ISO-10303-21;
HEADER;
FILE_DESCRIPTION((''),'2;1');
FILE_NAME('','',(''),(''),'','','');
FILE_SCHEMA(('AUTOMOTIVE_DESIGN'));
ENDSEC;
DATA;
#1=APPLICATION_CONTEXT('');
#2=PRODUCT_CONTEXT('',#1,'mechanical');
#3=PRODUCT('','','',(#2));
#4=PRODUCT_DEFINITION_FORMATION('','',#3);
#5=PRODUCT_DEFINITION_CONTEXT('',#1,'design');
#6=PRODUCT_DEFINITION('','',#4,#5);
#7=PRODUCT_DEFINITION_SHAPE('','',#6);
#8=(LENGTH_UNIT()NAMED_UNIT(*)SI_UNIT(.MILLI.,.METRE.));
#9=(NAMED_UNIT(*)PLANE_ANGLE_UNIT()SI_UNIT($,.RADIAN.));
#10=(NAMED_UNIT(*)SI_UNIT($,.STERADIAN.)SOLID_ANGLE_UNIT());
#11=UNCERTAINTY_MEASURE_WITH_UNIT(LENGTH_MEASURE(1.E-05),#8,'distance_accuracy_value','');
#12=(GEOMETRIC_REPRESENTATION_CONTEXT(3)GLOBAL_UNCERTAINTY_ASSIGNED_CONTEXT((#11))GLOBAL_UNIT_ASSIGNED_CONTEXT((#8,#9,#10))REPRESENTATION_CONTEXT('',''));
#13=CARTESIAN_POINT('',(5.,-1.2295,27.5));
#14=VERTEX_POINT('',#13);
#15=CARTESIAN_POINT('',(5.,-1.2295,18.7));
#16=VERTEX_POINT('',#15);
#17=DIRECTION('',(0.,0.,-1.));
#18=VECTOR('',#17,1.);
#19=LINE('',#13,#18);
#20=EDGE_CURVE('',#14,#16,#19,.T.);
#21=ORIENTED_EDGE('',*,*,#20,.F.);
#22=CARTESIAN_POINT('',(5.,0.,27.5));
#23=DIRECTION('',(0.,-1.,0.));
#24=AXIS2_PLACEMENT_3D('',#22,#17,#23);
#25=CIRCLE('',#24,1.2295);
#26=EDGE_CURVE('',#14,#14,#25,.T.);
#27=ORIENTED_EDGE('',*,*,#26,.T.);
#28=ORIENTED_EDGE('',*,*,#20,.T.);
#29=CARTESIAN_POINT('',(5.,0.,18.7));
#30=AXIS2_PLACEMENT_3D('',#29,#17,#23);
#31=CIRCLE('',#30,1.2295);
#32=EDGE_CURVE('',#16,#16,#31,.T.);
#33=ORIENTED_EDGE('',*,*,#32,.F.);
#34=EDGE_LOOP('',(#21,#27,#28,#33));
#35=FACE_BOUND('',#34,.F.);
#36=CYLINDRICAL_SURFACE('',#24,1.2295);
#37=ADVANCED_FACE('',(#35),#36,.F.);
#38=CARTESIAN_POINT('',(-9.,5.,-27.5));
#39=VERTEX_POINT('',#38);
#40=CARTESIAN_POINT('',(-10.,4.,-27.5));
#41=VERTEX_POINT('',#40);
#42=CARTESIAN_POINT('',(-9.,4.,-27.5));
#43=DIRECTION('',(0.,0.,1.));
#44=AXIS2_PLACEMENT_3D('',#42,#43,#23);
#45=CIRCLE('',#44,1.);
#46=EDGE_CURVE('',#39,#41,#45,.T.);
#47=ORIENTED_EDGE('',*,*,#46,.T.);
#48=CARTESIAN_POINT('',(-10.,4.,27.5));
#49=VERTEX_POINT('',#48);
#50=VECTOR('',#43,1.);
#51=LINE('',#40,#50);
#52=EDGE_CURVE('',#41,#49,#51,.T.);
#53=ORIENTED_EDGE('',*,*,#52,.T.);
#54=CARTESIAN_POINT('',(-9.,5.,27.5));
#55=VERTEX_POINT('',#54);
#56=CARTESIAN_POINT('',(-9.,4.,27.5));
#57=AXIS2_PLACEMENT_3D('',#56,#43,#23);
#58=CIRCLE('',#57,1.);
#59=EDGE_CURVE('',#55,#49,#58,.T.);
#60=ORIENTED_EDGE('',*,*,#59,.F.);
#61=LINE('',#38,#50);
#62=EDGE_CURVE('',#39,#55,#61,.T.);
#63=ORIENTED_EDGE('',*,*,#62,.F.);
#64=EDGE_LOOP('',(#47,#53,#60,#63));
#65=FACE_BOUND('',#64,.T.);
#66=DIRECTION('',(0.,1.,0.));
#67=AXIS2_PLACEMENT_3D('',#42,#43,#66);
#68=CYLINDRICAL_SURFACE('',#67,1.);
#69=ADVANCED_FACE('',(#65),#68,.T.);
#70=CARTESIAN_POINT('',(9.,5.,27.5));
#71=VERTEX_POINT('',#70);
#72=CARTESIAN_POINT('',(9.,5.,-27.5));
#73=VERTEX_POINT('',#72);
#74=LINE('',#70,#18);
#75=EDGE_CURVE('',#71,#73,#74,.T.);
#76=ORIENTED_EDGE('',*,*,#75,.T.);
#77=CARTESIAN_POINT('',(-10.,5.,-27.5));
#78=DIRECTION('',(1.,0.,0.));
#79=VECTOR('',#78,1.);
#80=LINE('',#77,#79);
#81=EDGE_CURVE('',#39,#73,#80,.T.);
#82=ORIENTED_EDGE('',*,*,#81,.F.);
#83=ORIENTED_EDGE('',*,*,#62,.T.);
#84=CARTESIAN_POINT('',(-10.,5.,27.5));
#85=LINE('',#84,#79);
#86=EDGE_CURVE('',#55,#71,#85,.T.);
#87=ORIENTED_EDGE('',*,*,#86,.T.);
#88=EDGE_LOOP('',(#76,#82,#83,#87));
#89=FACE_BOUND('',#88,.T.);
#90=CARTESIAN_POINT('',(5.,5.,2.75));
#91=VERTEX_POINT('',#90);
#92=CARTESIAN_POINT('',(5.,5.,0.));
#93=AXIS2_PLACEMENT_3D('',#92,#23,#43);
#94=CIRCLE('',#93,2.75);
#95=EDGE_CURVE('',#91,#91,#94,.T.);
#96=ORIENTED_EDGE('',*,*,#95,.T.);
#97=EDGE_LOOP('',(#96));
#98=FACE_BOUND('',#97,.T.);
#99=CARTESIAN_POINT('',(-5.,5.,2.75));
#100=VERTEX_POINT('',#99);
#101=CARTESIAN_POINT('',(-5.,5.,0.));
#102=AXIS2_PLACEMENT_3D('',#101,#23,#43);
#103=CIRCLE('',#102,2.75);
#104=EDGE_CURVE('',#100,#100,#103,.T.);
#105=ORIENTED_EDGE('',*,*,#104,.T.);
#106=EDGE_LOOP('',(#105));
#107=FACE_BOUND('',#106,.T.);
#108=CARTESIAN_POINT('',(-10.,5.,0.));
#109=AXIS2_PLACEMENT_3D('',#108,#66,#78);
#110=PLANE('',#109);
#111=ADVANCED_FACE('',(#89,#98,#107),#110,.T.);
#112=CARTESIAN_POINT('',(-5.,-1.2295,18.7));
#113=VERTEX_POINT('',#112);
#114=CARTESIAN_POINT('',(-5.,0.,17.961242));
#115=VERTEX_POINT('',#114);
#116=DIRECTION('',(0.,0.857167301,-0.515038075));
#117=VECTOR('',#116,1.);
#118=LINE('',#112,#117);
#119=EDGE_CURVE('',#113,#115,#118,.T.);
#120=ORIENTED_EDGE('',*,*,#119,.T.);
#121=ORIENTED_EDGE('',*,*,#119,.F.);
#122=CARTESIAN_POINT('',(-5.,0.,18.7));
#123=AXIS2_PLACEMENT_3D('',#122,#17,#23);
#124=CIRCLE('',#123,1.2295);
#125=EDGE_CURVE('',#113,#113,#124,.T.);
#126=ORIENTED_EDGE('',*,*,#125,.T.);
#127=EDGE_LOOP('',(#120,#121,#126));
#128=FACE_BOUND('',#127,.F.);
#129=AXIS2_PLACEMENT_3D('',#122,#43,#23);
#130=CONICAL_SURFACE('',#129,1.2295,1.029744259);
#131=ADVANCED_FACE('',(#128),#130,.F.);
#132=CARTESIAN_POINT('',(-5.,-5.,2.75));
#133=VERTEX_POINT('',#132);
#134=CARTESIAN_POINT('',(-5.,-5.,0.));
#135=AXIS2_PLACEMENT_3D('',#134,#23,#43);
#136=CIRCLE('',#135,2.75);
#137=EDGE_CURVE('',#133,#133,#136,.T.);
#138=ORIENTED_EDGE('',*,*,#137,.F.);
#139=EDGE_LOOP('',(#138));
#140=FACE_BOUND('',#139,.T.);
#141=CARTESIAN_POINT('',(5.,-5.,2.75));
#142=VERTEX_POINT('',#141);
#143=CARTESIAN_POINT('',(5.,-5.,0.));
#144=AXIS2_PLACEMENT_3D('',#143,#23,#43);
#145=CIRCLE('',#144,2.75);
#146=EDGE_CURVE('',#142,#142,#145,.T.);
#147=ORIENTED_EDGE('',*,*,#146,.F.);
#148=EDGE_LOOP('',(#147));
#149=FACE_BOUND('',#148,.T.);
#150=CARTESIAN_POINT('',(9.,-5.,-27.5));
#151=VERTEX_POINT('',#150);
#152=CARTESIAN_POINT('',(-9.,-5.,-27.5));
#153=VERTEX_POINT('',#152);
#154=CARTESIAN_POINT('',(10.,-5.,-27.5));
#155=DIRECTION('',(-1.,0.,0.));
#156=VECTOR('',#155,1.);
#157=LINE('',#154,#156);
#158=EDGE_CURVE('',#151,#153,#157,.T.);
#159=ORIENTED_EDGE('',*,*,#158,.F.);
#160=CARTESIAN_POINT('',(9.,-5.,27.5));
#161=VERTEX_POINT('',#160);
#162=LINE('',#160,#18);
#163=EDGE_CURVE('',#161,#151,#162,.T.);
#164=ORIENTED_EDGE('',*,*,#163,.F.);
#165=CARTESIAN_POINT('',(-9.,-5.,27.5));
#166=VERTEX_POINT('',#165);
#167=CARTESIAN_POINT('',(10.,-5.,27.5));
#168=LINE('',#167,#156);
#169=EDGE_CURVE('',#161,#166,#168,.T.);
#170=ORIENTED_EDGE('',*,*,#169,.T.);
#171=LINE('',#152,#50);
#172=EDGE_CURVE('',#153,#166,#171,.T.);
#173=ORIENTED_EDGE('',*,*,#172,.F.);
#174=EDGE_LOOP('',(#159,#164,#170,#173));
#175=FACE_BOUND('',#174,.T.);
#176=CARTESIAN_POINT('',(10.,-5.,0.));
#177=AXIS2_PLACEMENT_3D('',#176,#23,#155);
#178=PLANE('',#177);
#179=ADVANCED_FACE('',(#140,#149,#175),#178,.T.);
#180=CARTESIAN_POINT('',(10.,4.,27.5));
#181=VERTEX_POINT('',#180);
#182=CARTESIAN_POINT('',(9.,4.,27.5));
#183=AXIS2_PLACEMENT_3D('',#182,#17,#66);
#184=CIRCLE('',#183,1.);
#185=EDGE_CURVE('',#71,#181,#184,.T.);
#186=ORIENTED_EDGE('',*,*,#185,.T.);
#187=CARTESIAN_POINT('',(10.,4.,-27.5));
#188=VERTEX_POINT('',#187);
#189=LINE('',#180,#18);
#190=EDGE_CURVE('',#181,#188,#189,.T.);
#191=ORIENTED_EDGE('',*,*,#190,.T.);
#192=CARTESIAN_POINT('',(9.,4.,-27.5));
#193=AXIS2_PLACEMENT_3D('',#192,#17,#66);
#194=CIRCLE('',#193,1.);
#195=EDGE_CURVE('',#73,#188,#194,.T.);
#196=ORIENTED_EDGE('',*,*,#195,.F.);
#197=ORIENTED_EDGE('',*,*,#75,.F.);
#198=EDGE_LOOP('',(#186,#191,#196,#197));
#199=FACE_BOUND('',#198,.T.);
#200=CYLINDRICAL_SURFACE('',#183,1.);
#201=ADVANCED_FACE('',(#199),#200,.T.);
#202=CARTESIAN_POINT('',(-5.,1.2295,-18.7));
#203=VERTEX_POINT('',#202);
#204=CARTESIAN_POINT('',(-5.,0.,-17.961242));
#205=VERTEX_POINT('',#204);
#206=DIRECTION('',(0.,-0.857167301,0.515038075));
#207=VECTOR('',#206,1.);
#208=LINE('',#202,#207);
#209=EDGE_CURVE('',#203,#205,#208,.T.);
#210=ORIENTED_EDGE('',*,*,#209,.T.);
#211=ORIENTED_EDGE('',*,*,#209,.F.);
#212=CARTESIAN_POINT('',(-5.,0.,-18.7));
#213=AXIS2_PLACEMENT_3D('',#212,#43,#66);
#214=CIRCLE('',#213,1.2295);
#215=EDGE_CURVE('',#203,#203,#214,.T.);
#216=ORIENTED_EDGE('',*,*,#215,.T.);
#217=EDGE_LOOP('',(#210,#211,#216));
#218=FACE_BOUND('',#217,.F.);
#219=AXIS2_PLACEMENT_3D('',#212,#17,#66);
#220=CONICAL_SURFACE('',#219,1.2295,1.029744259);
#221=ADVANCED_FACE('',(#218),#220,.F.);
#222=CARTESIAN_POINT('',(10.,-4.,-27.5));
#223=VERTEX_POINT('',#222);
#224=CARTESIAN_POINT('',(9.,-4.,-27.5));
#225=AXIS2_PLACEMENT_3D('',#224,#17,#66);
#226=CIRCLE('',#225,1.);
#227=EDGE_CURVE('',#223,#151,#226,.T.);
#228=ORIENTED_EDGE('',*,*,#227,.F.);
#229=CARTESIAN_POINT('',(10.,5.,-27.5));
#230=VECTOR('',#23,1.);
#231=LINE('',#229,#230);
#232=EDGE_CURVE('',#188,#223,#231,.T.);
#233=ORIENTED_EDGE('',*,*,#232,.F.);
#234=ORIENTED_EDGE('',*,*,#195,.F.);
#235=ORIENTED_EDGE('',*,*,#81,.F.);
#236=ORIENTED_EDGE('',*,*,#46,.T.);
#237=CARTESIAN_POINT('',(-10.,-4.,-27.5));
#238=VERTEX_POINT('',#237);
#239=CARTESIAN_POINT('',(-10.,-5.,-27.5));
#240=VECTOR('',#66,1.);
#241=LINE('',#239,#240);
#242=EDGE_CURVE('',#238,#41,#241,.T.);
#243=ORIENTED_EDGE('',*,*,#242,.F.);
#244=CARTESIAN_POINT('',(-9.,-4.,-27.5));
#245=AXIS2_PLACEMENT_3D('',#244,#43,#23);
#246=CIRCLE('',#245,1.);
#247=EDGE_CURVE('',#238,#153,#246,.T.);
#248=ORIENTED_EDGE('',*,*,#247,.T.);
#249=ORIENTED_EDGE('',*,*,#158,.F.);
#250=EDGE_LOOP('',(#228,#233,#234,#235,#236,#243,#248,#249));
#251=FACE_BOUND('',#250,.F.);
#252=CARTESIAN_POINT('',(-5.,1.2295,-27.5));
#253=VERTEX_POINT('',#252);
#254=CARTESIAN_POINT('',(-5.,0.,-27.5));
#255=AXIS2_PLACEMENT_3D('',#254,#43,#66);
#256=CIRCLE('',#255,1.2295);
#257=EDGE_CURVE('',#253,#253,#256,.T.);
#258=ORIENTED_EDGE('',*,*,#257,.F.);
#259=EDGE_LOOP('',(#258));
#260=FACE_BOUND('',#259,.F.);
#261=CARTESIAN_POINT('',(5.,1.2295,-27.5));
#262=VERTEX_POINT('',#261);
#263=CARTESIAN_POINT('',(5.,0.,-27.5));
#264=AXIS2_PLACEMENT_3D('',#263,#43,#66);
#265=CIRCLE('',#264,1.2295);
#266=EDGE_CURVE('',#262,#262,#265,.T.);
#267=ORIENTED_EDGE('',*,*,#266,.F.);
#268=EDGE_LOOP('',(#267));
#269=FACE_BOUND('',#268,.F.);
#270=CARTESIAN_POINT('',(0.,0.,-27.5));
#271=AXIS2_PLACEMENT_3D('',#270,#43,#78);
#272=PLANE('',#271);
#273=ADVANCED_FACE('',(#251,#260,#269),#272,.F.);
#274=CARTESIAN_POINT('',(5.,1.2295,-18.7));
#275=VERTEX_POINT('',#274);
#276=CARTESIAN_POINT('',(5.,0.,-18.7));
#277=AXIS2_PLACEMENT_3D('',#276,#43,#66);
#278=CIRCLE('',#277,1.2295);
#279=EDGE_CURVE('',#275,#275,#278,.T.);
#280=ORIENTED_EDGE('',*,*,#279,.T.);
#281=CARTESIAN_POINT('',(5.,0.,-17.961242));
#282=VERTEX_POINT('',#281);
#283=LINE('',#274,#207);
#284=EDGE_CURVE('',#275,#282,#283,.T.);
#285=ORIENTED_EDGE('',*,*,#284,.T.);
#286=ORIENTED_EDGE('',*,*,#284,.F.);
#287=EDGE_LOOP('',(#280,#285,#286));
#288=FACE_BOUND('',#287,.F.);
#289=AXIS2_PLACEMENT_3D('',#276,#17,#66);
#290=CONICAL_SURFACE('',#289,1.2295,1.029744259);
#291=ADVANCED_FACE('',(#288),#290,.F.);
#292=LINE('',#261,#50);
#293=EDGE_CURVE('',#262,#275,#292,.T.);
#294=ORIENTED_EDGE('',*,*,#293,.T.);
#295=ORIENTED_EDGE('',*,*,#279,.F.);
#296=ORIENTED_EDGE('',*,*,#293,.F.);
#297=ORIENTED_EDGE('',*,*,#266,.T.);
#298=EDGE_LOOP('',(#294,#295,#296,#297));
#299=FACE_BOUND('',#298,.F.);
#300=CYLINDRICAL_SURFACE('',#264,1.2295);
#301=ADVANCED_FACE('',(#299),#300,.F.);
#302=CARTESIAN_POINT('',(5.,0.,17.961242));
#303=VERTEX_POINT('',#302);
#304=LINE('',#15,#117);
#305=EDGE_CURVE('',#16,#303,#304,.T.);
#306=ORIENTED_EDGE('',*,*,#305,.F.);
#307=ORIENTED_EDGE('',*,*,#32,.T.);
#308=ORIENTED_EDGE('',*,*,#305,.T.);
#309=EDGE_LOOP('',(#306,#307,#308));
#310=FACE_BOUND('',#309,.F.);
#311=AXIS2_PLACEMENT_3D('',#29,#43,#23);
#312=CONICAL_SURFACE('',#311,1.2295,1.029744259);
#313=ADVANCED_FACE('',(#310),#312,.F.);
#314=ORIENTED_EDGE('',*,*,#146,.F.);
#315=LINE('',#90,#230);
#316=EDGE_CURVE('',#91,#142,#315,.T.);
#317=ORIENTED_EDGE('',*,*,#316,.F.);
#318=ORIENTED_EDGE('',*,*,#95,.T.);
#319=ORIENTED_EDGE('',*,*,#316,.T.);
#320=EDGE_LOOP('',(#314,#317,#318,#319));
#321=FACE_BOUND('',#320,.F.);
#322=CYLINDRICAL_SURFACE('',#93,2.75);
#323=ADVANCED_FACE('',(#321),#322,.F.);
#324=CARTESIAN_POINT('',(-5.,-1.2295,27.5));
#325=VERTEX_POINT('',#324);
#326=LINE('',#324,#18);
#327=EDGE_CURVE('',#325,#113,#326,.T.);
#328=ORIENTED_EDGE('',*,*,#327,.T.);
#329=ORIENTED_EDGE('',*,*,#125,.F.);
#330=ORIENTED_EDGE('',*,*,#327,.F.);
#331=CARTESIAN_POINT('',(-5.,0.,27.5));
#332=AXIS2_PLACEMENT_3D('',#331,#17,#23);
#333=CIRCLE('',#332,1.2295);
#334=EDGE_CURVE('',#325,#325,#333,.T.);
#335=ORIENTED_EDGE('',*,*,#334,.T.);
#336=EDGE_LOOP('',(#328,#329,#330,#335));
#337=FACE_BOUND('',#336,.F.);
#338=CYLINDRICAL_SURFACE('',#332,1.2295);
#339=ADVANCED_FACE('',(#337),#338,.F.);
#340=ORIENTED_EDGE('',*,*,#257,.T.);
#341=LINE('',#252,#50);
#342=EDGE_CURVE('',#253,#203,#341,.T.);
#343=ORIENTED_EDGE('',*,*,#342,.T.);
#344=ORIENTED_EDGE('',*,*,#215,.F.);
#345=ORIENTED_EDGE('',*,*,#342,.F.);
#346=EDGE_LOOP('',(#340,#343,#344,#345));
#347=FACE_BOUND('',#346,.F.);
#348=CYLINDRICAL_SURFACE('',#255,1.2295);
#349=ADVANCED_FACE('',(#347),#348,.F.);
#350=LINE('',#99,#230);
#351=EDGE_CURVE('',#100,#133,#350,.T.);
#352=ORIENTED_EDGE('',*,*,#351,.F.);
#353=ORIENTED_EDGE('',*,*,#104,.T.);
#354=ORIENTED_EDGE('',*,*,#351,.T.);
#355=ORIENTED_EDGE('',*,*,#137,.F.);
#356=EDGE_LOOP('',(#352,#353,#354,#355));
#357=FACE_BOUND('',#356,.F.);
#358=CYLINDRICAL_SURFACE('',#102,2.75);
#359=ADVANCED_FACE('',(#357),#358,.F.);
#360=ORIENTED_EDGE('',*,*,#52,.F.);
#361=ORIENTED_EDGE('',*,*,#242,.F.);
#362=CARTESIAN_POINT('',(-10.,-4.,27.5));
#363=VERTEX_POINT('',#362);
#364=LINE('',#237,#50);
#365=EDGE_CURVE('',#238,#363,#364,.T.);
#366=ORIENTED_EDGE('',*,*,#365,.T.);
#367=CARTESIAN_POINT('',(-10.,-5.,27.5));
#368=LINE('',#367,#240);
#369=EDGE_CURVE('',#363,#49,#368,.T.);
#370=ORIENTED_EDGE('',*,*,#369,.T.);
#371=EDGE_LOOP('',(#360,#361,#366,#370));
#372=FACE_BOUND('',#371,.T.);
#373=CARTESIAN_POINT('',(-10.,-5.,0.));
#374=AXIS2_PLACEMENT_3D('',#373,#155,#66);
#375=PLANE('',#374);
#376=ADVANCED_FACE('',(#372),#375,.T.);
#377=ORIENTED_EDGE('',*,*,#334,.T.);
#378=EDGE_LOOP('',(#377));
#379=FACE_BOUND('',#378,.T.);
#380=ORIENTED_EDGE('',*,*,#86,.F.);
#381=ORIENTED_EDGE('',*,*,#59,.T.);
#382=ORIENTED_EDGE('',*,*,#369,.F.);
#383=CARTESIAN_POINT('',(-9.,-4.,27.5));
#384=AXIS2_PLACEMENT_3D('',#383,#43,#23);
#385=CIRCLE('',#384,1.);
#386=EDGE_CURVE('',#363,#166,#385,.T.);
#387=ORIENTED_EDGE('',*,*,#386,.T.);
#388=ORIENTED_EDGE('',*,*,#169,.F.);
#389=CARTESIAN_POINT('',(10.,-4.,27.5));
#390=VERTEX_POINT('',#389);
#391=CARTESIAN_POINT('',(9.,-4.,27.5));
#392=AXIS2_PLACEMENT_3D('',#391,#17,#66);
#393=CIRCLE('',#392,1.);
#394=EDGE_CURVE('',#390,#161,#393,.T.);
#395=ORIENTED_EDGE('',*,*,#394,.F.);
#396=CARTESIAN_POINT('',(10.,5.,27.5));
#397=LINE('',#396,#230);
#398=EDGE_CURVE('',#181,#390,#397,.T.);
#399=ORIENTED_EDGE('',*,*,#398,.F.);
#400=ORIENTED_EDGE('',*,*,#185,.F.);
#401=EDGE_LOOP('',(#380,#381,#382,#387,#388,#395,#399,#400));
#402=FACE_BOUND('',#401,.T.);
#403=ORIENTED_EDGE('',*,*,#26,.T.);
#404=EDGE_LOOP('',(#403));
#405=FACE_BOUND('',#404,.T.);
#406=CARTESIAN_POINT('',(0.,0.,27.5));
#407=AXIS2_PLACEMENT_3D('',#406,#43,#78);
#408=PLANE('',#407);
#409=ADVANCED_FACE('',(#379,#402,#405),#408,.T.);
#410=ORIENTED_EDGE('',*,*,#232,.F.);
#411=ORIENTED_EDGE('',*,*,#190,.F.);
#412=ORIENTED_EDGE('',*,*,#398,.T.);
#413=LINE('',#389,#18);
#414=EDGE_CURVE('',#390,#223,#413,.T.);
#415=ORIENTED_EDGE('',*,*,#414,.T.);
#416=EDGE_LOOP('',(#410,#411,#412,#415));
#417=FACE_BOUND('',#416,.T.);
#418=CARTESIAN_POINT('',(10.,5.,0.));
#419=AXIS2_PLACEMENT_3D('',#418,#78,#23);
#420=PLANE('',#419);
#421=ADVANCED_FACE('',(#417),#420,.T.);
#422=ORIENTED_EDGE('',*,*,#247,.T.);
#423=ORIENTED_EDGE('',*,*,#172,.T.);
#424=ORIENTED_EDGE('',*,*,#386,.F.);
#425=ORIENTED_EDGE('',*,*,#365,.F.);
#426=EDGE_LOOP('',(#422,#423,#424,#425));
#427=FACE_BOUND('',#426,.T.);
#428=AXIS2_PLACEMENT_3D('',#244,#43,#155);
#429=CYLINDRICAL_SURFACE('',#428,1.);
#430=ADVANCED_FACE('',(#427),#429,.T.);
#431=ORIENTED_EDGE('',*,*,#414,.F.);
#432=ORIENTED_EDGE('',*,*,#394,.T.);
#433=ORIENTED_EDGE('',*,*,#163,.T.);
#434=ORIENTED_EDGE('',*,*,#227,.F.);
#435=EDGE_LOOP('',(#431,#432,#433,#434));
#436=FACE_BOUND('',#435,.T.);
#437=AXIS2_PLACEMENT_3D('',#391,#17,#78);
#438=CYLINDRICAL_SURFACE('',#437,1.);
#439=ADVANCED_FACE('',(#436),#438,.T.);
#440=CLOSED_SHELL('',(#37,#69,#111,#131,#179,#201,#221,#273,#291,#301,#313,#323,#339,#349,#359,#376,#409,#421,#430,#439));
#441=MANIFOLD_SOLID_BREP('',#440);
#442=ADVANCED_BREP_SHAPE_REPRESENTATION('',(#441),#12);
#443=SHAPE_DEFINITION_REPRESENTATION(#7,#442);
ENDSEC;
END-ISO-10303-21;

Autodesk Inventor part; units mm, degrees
ref_plane "YZ Plane" through (0, 0, 0) normal (1, 0, 0) x (0, 1, 0)
ref_plane "XZ Plane" through (0, 0, 0) normal (0, 1, 0) x (-1, 0, 0)
ref_plane "XY Plane" through (0, 0, 0) normal (0, 0, 1) x (1, 0, 0)
sketch "スケッチ1" plane through (0, 0, 0) normal (0, 0, 1) x (1, 0, 0)
  line L0 (-10, 5) -> (10, 5)
  line L1 (10, 5) -> (10, -5)
  line L2 (10, -5) -> (-10, -5)
  line L3 (-10, -5) -> (-10, 5)
  line L4 (-10, 5) -> (10, -5) construction
  line L5 (10, 5) -> (-10, -5) construction
  point P0 (0, 0)
  dimension "d0" = 20
  dimension "d1" = 10
extrude "押し出し1" add sketch "スケッチ1" along normal mid plane 55
sketch "スケッチ2" plane through (0, 0, 27.5) normal (0, 0, 1) x (1, 0, 0)
  line L0 (-10, -5) -> (10, -5) projected
  line L1 (-10, 5) -> (-10, -5) projected
  line L2 (10, -5) -> (10, 5) projected
  point P0 (0, 0)
  point P1 (-5, 0)
  point P2 (5, 0)
  dimension "d4" = 5
  dimension "d5" = 5
  dimension "d6" = 5
  dimension "d7" = 5
hole "穴1" at (-5, 0, 27.5) at (5, 0, 27.5) direction (0, 0, -1) diameter 2.459 depth 8.8 tip angle 118 thread size "M3x0.5" class "6H" standard "ISO Metric profile"
sketch "スケッチ3" plane through (0, 0, -27.5) normal (0, 0, -1) x (-1, 0, 0)
  line L0 (-10, -5) -> (10, -5) projected
  line L1 (10, -5) -> (10, 5) projected
  line L2 (10, 5) -> (-10, 5) projected
  line L3 (-10, 5) -> (-10, -5) projected
  circle A0 centre (-5, 0) radius 1.2295 projected
  circle A1 centre (5, 0) radius 1.2295 projected
  point P0 (0, 0)
hole "穴2" at (5, 0, -27.5) at (-5, 0, -27.5) direction (0, 0, 1) diameter 2.459 depth 8.8 tip angle 118 thread size "M3x0.5" class "6H" standard "ISO Metric profile"
sketch "スケッチ5" plane through (-10, 5, 27.5) normal (0, 1, 0) x (1, 0, 0)
  line L0 (20, 55) -> (20, 0) projected
  line L1 (0, 55) -> (20, 55) projected
  point P0 (10, 27.5)
  point P1 (15, 27.5)
  point P2 (5, 27.5)
  dimension "d22" = 5
  dimension "d23" = 10
  dimension "d24" = 27.5
  dimension "d25" = 27.5
hole "穴3" at (5, 5, 0) at (-5, 5, 0) direction (0, -1, 0) diameter 5.5 end through all
fillet "フィレット1" radius 1 4 edges at (-10, 5, 0) (10, 5, 0) (10, -5, 0) (-10, -5, 0)
equation "\"d5\" = d4"
equation "\"d6\" = d4"
equation "\"d7\" = d5"
equation "\"d25\" = d24"
properties part number "center_part"
